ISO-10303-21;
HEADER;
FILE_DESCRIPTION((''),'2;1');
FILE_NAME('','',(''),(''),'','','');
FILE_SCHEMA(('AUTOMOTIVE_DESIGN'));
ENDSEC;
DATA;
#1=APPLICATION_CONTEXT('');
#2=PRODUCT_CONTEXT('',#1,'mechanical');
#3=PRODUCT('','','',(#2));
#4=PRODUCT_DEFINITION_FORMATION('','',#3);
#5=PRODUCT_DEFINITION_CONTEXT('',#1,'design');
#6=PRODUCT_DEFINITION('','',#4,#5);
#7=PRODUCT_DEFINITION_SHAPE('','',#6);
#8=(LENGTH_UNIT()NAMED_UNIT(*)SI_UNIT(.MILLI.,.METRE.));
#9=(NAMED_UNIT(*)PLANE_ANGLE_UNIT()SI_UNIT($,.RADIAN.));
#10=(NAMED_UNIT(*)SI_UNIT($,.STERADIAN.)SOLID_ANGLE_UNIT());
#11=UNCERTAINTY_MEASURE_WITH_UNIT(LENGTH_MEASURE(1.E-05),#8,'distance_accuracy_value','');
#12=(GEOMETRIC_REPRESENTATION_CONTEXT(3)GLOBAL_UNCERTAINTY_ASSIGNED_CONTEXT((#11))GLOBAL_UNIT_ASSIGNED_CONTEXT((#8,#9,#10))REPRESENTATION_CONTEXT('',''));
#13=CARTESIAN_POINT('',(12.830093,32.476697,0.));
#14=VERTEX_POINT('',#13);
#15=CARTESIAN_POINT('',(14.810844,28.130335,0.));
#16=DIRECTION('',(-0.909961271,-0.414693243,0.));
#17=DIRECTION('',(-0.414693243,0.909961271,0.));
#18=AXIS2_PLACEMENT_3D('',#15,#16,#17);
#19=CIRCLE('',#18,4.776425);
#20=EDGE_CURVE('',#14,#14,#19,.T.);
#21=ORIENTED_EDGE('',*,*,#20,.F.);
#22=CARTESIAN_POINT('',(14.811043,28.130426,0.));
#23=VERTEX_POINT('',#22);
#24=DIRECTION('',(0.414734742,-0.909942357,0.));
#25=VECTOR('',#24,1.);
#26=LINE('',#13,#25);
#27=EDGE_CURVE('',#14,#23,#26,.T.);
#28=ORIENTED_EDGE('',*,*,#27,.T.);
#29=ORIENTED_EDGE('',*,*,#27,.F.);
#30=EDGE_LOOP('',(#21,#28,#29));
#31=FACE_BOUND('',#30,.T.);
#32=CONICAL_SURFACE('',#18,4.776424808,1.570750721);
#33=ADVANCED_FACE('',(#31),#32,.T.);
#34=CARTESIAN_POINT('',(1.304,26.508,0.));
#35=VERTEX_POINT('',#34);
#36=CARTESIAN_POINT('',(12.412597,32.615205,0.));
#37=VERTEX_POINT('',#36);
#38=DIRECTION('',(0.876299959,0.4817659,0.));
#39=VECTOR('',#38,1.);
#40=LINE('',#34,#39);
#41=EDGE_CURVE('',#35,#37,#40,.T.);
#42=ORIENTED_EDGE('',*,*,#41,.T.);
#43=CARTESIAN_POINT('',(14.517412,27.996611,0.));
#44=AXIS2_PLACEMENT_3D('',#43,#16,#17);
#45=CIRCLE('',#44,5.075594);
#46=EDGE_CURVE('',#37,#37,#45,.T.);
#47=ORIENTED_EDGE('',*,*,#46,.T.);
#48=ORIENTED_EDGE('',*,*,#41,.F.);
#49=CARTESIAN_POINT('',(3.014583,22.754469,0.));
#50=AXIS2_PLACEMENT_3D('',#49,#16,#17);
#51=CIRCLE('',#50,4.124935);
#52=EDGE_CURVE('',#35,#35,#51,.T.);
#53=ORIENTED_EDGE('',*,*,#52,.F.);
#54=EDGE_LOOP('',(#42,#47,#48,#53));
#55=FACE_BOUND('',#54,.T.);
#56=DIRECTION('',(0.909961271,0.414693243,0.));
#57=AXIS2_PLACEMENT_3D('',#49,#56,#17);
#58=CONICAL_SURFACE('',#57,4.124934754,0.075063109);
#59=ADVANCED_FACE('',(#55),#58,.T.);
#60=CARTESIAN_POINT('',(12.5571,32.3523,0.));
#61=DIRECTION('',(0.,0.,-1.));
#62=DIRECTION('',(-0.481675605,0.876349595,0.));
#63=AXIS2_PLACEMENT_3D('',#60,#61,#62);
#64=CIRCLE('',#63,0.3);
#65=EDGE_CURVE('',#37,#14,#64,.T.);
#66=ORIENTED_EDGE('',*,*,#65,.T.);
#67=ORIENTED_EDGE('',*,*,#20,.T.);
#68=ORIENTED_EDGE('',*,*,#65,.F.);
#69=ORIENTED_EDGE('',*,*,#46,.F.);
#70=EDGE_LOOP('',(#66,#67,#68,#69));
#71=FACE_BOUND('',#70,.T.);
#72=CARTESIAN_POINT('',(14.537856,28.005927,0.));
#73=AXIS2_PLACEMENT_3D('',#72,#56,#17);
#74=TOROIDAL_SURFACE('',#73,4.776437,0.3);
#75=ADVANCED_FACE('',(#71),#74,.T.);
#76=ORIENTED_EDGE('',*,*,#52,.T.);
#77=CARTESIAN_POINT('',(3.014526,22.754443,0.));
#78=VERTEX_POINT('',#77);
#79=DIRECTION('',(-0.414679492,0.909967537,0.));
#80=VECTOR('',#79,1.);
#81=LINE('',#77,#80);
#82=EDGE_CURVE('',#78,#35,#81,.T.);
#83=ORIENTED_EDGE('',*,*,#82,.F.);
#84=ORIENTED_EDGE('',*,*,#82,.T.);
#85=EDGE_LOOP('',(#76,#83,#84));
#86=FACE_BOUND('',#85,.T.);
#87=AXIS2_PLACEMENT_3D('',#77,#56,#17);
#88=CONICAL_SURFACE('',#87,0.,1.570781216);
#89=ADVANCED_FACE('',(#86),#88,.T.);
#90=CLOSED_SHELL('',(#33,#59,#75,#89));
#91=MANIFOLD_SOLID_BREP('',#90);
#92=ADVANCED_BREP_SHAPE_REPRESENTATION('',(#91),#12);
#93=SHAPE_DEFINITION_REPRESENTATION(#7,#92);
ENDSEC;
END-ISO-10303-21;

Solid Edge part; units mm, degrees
sketch "Sketch1" plane through (0, 0, 0) normal (0, 0, 1) x (1, 0, 0)
  line L0 (3.0145, 22.7545) -> (1.304, 26.508)
  line L1 (1.304, 26.508) -> (12.4126, 32.6152)
  arc A0 (12.4126, 32.6152) -> (12.8301, 32.4767) centre (12.5571, 32.3523) cw
  line L2 (12.8301, 32.4767) -> (14.8111, 28.1303)
  line L3 (14.8111, 28.1303) -> (3.0145, 22.7545)
revolve "RevolvedProtrusion1" add sketch "Sketch1" angle 360 about axis through (6.768, 24.465, 0) along (-0.9099675, -0.4146795, 0)
properties material "Steel"
